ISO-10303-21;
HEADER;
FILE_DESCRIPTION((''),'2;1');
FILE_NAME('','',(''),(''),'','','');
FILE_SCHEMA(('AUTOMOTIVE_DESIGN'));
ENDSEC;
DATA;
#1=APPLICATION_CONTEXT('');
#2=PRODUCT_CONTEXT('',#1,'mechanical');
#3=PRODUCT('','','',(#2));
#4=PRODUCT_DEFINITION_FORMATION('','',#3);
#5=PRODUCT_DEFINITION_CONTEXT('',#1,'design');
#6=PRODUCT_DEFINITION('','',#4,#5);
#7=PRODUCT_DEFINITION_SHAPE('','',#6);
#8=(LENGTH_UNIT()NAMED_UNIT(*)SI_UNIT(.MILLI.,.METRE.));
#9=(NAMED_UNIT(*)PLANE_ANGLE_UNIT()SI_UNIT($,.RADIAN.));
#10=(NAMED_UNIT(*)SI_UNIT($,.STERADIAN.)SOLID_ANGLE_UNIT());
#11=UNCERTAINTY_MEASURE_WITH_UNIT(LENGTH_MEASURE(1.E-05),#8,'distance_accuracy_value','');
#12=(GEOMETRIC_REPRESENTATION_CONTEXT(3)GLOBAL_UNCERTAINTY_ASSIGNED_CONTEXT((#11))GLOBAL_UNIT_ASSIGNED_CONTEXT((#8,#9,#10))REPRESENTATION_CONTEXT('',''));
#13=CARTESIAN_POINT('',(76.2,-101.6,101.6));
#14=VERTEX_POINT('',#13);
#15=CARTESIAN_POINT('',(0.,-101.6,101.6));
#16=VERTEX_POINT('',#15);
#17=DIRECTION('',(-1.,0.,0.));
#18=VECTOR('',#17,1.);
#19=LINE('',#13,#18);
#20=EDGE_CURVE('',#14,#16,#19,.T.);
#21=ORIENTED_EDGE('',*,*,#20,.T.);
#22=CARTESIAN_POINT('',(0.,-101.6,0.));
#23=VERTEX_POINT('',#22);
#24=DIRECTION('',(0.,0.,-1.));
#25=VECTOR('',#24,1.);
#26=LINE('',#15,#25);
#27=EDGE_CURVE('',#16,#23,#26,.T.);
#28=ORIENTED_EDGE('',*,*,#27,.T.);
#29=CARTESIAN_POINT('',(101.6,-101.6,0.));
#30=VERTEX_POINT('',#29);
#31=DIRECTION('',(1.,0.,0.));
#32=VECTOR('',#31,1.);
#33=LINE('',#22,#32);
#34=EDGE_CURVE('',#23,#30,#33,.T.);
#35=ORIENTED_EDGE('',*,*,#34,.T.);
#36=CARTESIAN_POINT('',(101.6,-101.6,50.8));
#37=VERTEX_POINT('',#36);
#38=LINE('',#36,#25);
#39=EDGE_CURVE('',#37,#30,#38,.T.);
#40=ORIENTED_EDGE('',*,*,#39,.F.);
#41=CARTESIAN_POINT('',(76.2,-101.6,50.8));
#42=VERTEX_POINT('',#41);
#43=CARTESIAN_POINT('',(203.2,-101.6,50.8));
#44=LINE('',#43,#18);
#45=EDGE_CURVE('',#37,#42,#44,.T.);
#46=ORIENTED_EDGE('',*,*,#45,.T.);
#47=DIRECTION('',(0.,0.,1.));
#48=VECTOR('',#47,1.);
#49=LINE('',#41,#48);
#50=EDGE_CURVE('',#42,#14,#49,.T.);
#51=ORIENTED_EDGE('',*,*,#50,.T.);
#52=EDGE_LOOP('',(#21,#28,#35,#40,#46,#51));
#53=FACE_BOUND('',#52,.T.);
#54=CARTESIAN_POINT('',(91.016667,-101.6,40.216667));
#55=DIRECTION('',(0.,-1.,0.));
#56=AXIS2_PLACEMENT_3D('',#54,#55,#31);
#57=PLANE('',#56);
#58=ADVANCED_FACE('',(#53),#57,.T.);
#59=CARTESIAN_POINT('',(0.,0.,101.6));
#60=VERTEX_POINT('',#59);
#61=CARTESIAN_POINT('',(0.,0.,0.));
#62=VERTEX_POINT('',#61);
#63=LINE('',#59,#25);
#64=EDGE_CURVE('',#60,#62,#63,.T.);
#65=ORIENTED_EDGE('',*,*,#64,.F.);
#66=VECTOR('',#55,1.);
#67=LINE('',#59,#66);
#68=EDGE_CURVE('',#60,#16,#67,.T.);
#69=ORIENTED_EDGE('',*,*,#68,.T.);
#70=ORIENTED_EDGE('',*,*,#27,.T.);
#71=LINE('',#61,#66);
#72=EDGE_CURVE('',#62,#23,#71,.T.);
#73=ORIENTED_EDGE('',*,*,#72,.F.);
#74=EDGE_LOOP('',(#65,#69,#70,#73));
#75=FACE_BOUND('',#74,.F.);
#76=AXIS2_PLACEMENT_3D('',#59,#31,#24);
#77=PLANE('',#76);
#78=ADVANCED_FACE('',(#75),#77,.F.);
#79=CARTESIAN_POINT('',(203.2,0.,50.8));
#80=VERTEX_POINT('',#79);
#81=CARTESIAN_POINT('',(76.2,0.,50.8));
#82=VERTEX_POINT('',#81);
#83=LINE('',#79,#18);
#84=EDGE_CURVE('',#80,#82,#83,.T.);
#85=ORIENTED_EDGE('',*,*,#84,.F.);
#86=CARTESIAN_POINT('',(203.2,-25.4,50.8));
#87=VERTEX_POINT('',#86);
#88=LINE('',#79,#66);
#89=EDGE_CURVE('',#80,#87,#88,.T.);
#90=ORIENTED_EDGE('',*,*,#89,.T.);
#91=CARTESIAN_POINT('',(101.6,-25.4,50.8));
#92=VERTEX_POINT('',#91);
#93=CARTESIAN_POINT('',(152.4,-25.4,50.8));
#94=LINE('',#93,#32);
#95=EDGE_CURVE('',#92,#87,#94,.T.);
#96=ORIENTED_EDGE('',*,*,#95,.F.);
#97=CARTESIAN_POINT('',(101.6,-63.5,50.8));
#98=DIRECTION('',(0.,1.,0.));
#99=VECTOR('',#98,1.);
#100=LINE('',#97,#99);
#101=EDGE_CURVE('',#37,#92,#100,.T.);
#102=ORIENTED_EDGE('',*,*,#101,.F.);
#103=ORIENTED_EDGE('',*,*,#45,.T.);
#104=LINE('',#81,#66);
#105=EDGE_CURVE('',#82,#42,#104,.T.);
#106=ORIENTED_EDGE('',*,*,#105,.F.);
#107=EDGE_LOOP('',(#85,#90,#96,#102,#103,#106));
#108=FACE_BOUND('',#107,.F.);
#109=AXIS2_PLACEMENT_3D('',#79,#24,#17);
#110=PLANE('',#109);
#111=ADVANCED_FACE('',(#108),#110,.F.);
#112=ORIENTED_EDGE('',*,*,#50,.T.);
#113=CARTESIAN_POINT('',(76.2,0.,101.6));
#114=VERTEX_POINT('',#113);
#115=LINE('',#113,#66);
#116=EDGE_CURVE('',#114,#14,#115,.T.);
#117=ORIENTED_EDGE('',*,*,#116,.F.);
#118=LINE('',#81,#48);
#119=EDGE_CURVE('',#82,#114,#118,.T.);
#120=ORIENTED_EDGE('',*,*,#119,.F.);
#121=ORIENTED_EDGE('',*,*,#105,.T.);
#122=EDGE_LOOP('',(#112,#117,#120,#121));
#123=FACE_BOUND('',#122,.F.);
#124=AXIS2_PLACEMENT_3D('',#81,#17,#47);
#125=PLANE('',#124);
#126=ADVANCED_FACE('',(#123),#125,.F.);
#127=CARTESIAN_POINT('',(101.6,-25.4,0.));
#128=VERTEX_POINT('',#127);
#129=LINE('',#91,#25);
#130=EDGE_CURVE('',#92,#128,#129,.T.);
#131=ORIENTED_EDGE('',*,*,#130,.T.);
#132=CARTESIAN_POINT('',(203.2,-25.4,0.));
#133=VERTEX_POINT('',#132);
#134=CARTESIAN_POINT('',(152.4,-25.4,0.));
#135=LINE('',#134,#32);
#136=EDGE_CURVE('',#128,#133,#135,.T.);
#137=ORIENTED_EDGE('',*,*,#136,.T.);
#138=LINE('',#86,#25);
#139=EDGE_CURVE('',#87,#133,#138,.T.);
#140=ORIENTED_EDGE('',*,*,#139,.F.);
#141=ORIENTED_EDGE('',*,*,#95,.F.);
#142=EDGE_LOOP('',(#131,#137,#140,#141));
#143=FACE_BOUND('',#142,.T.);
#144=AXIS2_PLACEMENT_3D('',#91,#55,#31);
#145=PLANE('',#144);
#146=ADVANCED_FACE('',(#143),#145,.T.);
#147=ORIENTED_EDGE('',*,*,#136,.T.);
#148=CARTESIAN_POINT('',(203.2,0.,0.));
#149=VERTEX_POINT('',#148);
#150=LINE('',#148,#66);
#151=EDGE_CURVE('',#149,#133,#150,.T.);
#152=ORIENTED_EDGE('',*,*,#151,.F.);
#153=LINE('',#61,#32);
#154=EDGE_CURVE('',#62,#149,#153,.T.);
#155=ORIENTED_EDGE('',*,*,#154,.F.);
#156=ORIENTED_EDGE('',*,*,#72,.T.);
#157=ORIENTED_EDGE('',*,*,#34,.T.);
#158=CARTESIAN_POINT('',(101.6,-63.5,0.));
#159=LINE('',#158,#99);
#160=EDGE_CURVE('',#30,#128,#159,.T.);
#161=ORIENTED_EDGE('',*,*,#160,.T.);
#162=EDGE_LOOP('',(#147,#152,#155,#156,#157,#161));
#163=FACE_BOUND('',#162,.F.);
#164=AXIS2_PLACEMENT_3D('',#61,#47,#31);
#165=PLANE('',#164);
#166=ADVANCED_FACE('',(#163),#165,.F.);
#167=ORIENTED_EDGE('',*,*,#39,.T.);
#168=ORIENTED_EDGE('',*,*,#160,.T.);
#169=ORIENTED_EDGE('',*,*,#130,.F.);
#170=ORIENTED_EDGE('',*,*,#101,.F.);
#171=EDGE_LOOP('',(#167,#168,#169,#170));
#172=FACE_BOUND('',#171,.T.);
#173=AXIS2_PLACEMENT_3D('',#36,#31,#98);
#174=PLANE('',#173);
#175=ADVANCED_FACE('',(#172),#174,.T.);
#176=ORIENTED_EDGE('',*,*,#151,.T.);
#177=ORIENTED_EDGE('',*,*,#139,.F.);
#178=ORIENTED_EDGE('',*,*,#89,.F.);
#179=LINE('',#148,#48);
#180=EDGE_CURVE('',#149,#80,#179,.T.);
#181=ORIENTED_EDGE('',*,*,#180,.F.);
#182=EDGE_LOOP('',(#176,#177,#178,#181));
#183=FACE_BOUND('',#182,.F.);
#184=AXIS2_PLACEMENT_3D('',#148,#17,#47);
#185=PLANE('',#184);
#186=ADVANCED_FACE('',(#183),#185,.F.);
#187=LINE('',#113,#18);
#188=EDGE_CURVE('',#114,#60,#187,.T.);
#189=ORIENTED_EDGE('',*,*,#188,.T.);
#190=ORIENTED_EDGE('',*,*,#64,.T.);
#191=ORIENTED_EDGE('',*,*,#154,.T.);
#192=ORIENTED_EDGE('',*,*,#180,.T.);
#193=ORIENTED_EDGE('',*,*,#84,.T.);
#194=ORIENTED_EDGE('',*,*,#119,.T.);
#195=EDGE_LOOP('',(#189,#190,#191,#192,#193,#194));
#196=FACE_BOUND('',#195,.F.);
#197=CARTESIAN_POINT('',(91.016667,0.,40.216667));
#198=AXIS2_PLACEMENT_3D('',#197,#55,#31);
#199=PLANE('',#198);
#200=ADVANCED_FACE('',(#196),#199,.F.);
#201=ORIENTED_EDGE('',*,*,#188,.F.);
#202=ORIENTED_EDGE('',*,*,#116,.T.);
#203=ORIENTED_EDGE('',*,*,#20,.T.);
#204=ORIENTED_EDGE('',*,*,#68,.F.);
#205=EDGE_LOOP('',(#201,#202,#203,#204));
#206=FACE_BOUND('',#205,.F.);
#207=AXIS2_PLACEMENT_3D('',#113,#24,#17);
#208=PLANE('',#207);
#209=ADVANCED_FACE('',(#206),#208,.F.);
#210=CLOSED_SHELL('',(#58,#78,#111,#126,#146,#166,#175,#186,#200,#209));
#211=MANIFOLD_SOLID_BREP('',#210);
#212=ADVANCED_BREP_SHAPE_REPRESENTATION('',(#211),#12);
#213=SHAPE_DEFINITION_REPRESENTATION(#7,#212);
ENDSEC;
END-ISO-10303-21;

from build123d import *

# Parameters (mm, degrees)
F1_DEPTH = 101.6
F2_W     = 101.6
F2_H     = 76.2
F3_DEPTH = 50.8
F4_DEPTH = 50.8


# Not quite as in the source:
# - a feature names something its author has since deleted; it is built from what else it names


with BuildPart() as f1:
    # F0 (on Front) → F1 (new body)
    with BuildSketch(Plane.XZ):
        Polygon((0, 101.6), (0, 0), (203.2, 0), (203.2, 50.8), (76.2, 50.8), (76.2, 101.6), align=None)
    extrude(amount=F1_DEPTH)

    # F2 (on face) → F3 (cut)
    with BuildSketch(Plane.XY.offset(50.8)):
        with Locations((152.4, -63.5)):
            Rectangle(F2_W, F2_H)
    extrude(amount=-F3_DEPTH, mode=Mode.SUBTRACT)

    # F2 (on face) → F4 (cut)
    with BuildSketch(Plane.XY.offset(50.8)):
        with Locations((152.4, -63.5)):
            Rectangle(F2_W, F2_H)
    extrude(amount=-F4_DEPTH, mode=Mode.SUBTRACT)


solid = f1.part
